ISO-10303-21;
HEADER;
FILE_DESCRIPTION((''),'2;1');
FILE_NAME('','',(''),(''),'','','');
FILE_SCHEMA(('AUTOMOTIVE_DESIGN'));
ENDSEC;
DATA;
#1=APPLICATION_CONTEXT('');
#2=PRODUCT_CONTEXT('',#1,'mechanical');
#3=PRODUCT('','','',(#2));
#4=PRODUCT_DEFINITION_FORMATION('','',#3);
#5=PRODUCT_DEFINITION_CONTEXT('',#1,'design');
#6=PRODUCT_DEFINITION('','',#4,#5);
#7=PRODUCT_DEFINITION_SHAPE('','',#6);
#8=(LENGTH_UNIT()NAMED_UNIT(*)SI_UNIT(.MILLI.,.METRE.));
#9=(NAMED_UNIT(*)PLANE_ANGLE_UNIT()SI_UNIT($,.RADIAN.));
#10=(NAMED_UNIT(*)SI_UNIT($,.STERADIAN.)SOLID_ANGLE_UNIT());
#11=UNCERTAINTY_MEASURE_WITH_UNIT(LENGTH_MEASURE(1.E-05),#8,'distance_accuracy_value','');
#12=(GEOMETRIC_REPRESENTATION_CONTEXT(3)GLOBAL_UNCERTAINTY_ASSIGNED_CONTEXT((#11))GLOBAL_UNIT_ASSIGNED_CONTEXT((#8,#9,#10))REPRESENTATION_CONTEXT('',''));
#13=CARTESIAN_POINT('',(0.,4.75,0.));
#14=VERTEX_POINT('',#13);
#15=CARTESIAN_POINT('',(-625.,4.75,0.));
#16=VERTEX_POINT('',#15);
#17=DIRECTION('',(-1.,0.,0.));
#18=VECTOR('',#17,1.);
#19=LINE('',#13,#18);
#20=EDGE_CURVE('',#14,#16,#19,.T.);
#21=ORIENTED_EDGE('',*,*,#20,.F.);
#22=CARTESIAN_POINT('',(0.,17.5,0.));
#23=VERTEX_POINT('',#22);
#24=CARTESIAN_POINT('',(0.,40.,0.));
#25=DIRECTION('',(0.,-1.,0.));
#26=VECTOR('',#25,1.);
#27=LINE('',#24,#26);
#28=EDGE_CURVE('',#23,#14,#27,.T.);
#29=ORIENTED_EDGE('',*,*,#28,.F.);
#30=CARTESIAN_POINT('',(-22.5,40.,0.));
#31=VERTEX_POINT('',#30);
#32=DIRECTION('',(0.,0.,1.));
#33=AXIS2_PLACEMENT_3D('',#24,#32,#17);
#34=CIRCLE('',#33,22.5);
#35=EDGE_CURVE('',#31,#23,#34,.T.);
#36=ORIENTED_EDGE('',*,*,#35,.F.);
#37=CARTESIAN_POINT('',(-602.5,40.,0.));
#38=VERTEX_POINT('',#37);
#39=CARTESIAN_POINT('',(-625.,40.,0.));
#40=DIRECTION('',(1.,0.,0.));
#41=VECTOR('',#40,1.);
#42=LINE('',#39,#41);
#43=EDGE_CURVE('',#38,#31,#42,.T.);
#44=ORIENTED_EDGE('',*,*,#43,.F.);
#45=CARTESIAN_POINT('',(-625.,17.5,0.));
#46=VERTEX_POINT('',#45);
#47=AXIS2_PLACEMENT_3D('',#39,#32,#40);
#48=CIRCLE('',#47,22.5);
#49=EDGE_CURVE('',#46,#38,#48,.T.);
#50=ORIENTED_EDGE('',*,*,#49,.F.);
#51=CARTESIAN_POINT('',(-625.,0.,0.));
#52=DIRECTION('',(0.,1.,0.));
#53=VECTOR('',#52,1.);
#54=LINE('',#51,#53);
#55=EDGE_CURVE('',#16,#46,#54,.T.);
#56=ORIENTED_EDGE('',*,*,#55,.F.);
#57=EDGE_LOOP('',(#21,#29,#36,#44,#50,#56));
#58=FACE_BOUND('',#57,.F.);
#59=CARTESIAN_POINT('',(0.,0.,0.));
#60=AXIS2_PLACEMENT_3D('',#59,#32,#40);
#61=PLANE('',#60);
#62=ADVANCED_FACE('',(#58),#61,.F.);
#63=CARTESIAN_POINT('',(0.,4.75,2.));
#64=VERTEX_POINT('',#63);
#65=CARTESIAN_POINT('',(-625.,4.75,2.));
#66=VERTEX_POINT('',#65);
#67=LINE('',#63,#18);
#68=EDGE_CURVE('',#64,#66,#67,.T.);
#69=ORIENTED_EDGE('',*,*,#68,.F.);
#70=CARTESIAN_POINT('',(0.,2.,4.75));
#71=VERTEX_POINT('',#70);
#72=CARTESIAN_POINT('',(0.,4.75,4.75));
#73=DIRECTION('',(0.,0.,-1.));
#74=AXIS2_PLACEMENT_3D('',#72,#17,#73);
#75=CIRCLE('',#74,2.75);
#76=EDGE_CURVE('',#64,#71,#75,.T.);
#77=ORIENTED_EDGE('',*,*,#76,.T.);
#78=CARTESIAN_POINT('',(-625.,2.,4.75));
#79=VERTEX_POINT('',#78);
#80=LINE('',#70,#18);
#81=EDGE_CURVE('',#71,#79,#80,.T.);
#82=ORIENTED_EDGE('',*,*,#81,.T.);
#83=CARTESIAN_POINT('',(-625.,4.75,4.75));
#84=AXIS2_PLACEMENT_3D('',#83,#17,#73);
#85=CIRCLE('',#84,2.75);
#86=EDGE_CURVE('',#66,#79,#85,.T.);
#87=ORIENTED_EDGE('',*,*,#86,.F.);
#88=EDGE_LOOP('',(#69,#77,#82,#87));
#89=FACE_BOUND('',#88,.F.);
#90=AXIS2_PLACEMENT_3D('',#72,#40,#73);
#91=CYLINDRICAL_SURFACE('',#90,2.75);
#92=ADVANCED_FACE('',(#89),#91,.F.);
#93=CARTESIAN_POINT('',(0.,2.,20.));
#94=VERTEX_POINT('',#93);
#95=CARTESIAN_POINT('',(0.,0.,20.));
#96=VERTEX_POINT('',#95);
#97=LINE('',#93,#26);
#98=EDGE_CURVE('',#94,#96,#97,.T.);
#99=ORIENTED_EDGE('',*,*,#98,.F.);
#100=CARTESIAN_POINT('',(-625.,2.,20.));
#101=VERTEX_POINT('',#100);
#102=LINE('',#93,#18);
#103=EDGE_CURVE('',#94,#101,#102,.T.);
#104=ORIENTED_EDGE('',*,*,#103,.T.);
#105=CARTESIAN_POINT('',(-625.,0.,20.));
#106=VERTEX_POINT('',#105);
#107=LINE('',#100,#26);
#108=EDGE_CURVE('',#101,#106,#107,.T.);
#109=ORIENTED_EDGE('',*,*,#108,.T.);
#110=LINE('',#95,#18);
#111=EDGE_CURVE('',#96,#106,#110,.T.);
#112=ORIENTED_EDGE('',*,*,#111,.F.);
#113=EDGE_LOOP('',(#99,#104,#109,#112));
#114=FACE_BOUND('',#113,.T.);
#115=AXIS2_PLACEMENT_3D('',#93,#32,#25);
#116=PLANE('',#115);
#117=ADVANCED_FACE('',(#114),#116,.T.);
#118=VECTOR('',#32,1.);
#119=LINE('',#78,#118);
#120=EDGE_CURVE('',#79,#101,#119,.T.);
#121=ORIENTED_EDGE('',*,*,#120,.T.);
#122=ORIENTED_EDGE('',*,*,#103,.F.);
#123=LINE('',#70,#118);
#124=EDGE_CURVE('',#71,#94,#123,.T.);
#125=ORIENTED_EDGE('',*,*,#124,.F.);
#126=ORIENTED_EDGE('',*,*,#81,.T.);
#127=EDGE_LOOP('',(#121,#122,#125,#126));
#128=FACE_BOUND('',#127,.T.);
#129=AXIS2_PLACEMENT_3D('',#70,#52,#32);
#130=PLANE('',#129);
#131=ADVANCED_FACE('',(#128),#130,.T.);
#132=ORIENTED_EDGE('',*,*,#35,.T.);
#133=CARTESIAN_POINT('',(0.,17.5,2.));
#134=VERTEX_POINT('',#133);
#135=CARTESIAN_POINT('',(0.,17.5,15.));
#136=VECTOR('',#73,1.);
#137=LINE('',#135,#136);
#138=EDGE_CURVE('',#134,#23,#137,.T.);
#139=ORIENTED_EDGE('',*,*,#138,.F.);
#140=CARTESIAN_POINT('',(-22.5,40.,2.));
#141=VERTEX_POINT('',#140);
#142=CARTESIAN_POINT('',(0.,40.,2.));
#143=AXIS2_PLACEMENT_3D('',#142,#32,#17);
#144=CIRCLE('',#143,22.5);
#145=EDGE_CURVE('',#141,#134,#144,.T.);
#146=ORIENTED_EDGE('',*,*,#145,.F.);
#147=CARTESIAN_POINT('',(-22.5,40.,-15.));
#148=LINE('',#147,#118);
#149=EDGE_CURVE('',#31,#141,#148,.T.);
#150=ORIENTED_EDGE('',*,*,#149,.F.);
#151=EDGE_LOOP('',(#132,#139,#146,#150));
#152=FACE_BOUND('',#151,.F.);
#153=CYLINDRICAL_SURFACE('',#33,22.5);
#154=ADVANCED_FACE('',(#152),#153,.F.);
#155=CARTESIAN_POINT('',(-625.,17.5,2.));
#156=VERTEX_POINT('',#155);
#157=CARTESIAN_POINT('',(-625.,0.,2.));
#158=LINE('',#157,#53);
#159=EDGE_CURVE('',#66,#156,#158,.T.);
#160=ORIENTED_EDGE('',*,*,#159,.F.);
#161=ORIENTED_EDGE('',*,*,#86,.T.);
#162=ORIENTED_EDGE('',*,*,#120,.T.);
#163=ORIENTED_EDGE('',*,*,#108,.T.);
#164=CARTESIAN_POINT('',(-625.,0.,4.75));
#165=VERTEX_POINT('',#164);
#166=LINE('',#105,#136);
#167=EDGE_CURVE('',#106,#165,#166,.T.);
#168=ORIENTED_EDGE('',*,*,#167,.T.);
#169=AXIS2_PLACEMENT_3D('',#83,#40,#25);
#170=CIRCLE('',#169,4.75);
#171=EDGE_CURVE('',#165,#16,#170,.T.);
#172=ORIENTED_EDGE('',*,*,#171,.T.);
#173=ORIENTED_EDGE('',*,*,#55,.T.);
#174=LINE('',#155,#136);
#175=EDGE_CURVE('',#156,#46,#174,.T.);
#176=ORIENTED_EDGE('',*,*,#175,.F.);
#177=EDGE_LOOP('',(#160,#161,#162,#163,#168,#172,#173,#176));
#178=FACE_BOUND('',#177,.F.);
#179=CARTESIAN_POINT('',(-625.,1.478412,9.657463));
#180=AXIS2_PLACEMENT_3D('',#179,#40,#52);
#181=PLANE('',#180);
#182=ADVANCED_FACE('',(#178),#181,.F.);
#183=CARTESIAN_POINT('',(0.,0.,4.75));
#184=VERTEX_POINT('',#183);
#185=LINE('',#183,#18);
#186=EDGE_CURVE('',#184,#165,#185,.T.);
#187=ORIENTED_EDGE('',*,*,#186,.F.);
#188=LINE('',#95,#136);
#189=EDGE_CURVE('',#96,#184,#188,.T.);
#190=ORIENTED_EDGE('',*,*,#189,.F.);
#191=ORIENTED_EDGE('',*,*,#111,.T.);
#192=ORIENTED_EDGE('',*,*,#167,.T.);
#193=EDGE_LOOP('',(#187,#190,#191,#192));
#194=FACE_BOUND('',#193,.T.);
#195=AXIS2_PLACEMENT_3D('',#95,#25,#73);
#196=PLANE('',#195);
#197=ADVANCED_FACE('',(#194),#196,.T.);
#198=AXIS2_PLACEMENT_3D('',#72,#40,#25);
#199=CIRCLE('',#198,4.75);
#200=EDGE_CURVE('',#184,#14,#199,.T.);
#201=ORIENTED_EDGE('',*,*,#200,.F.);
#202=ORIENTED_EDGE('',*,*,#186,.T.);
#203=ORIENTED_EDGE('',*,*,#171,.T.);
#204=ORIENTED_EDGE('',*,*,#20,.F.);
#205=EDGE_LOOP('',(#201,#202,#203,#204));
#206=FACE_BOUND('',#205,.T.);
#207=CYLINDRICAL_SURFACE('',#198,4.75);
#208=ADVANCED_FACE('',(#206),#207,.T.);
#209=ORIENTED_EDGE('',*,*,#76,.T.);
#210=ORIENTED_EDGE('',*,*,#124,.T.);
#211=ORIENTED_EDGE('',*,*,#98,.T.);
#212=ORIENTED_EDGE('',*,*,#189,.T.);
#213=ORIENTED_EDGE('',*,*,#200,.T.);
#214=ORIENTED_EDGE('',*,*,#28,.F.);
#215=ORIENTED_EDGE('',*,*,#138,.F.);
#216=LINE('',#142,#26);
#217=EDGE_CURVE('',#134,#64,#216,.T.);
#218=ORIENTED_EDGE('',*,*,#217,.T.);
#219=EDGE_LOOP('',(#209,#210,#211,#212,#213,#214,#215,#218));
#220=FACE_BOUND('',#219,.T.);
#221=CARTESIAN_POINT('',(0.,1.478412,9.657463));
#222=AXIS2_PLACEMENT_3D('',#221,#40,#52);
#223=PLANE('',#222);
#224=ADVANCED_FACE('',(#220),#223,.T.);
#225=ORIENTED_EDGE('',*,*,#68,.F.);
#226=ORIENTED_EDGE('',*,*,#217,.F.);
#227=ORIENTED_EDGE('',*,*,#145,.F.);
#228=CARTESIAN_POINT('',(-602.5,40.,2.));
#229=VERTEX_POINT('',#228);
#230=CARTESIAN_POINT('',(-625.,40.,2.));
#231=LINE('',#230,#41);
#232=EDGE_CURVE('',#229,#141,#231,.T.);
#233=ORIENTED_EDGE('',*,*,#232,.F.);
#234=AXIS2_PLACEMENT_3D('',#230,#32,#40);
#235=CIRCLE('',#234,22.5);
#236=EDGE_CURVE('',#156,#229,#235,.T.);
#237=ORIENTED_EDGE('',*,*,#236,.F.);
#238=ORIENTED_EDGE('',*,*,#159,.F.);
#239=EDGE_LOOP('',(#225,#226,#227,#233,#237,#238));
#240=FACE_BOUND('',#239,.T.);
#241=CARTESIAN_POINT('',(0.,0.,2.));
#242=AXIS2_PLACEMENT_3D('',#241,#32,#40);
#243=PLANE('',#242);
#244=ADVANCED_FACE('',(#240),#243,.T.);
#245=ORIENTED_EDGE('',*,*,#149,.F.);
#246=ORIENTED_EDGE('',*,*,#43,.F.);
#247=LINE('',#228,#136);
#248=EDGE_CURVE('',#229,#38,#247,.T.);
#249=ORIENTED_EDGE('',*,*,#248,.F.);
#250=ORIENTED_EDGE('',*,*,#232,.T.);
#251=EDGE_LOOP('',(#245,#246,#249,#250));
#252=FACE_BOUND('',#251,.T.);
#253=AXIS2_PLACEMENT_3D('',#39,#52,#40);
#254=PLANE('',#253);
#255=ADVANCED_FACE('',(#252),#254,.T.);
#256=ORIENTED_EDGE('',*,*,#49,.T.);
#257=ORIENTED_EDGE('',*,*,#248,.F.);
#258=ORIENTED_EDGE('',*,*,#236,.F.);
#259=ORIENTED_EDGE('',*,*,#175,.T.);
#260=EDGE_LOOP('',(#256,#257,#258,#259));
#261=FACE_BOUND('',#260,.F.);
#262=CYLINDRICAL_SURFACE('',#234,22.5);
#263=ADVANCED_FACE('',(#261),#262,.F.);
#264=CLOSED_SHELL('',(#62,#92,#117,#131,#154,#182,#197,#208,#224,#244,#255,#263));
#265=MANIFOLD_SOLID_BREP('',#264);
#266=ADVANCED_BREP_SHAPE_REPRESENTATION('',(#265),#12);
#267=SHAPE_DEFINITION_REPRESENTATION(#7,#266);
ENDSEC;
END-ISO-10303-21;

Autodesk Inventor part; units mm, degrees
ref_plane "YZ Plane" through (0, 0, 0) normal (1, 0, 0) x (0, 1, 0)
ref_plane "XZ Plane" through (0, 0, 0) normal (0, 1, 0) x (-1, 0, 0)
ref_plane "XY Plane" through (0, 0, 0) normal (0, 0, 1) x (1, 0, 0)
sketch "Sketch1" plane through (0, 0, 0) normal (0, 0, 1) x (1, 0, 0)
  line L0 (-625, 40) -> (0, 40)
  line L1 (0, 40) -> (0, 0)
  line L2 (0, 0) -> (-625, 0)
  line L3 (-625, 0) -> (-625, 40)
  point P0 (-312.5, 0)
  dimension "d1" = 40
  dimension "d45" = 625
extrude "Plate1" add sketch "Sketch1" along normal blind 2
sketch "Sketch2" plane through (0, 2, 0) normal (0, -1, 0) x (1, 0, 0)
  line L0 (-625, 0) -> (0, 0)
  line L1 (0, 0) -> (0, 20)
  line L2 (0, 20) -> (-625, 20)
  line L3 (-625, 20) -> (-625, 0)
edge flange "Flange1" height 20 angle 90 thickness 2 bend radius 2.75 thickness toward (0, -1, 0) relief round relief width 2 relief depth 1 edges at (-312.5, 0, 2) wall of the first edge with corners at (-625, 2, 0) (0, 2, 0) (0, 2, 20) (-625, 2, 20)
bend "Bend1"
corner "Corner1"
sketch "Sketch6" plane through (0, 0, 0) normal (0, 0, -1) x (-1, 0, 0)
  line L0 (0, 40) -> (0, 4.75) projected
  circle A0 centre (0, 40) radius 22.5
  line L1 (0, 40) -> (625, 40) projected
  line L2 (-499, 30) -> (-499, 67.6691) projected
  point P0 (0, 0)
  point P1 (22.5, 40)
  point P2 (0, 17.5)
  dimension "d24" = 45
extrude "Extrusion2" cut sketch "Sketch6" along normal mid plane 30 contours L1 A0 L0 picked at (14.812, 38.3311)
sketch "Sketch9" plane through (0, 0, 2) normal (0, 0, 1) x (1, 0, 0)
  line L0 (-256.9226, 35) -> (-256.9226, 23) construction
  line L1 (-256.9226, 23) -> (-456.9226, 23) construction
  line L2 (-456.9226, 23) -> (-456.9226, 35) construction
  line L3 (-456.9226, 35) -> (-256.9226, 35) construction
  line L4 (-625, 40) -> (0, 40) projected
  point P0 (0, 0)
  dimension "d40" = 200
  dimension "d41" = 12
  dimension "d43" = 5
mark "Mark2"
sketch "Sketch10" plane through (-625, 40, 2) normal (0, 0, 1) x (1, 0, 0)
  circle A0 centre (0, 0) radius 22.5
  line L0 (171.5218, -6.4882) -> (171.5218, -9.8215) projected
  line L1 (171.5218, -9.8215) -> (171.5218, -16.4882) projected
  line L2 (171.5218, -9.8215) -> (167.0774, -13.1549) projected
  line L3 (194.8552, -13.1549) -> (194.8552, -6.4882) projected
  line L4 (194.8552, -16.4882) -> (194.8552, -13.1549) projected
  line L5 (192.0774, -13.1549) -> (194.8552, -13.1549) projected
  arc A1 (190.4107, -11.4882) -> (192.0774, -13.1549) centre (192.0774, -11.4882) ccw projected
  line L6 (190.4107, -8.1549) -> (190.4107, -11.4882) projected
  arc A2 (192.0774, -6.4882) -> (190.4107, -8.1549) centre (192.0774, -8.1549) ccw projected
  line L7 (194.8552, -6.4882) -> (192.0774, -6.4882) projected
  line L8 (230.4107, -6.4882) -> (230.9663, -6.4882) projected
  arc A3 (232.6329, -8.1549) -> (230.9663, -6.4882) centre (230.9663, -8.1549) ccw projected
  line L9 (232.6329, -8.1549) -> (232.6329, -16.4882) projected
  circle A4 centre (276.244, -16.2104) radius 0.2778 projected
  line L10 (276.244, -6.4882) -> (276.244, -13.1549) projected
  line L11 (288.744, -6.4882) -> (288.744, -13.1549) projected
  line L12 (289.8552, -13.1549) -> (288.744, -13.1549) projected
  line L13 (288.744, -13.1549) -> (288.744, -16.4882) projected
  line L14 (288.744, -13.1549) -> (286.5218, -13.1549) projected
  line L15 (344.2996, -6.4882) -> (346.5218, -6.4882) projected
  arc A5 (348.744, -8.7104) -> (346.5218, -6.4882) centre (346.5218, -8.7104) ccw projected
  line L16 (348.744, -8.7104) -> (348.744, -14.266) projected
  arc A6 (346.5218, -16.4882) -> (348.744, -14.266) centre (346.5218, -14.266) ccw projected
  line L17 (346.5218, -16.4882) -> (344.2996, -16.4882) projected
  line L18 (367.0774, -6.4882) -> (367.0774, -16.4882) projected
  line L19 (367.0774, -16.4882) -> (363.744, -10.9326) projected
  line L20 (363.744, -10.9326) -> (360.4107, -16.4882) projected
  line L21 (360.4107, -16.4882) -> (360.4107, -6.4882) projected
  arc A7 (357.0774, -7.0437) -> (354.2996, -6.4882) centre (355.0103, -10.157) ccw projected
  arc A8 (354.2996, -6.4882) -> (353.1885, -10.9326) centre (354.3983, -8.874) ccw projected
  line L22 (353.1885, -10.9326) -> (355.9663, -12.5993) projected
  arc A9 (356.5218, -15.9326) -> (355.9663, -12.5993) centre (354.8374, -14.5004) ccw projected
  arc A10 (352.0774, -15.9326) -> (356.5218, -15.9326) centre (354.2996, -11.8029) ccw projected
  arc A11 (327.0774, -15.3771) -> (330.4107, -15.3771) centre (328.744, -14.6897) ccw projected
  arc A12 (327.0774, -7.5993) -> (327.0774, -15.3771) centre (340.5209, -11.4882) ccw projected
  arc A13 (330.4107, -7.5993) -> (327.0774, -7.5993) centre (328.744, -8.308) ccw projected
  arc A14 (330.4107, -15.3771) -> (330.4107, -7.5993) centre (316.9672, -11.4882) ccw projected
  arc A15 (319.8552, -16.4882) -> (323.1885, -10.9326) centre (317.4255, -11.2526) ccw projected
  line L23 (323.1885, -10.9326) -> (323.1885, -8.7104) projected
  arc A16 (323.1885, -8.7104) -> (318.744, -8.7104) centre (320.9663, -8.7104) ccw projected
  line L24 (318.744, -8.7104) -> (318.744, -9.8215) projected
  arc A17 (318.744, -9.8215) -> (320.9663, -12.0437) centre (320.9663, -9.8215) ccw projected
  line L25 (320.9663, -12.0437) -> (322.6329, -12.0437) projected
  line L26 (310.9663, -8.7104) -> (310.9663, -9.8215) projected
  arc A18 (315.4107, -8.7104) -> (310.9663, -8.7104) centre (313.1885, -8.7104) ccw projected
  line L27 (315.4107, -9.8215) -> (315.4107, -8.7104) projected
  arc A19 (313.1885, -12.0437) -> (315.4107, -9.8215) centre (313.1885, -9.8215) ccw projected
  line L28 (313.744, -12.0437) -> (313.1885, -12.0437) projected
  arc A20 (315.4107, -13.7104) -> (313.744, -12.0437) centre (313.744, -13.7104) ccw projected
  line L29 (315.4107, -14.8215) -> (315.4107, -13.7104) projected
  arc A21 (313.744, -16.4882) -> (315.4107, -14.8215) centre (313.744, -14.8215) ccw projected
  line L30 (312.6329, -16.4882) -> (313.744, -16.4882) projected
  arc A22 (310.9663, -14.8215) -> (312.6329, -16.4882) centre (312.6329, -14.8215) ccw projected
  line L31 (310.9663, -13.7104) -> (310.9663, -14.8215) projected
  arc A23 (312.6329, -12.0437) -> (310.9663, -13.7104) centre (312.6329, -13.7104) ccw projected
  line L32 (313.1885, -12.0437) -> (312.6329, -12.0437) projected
  arc A24 (310.9663, -9.8215) -> (313.1885, -12.0437) centre (313.1885, -9.8215) ccw projected
  arc A25 (297.6329, -7.5993) -> (295.9663, -6.4882) centre (295.9544, -8.3116) ccw projected
  line L33 (295.9663, -6.4882) -> (294.8552, -6.4882) projected
  arc A26 (294.8552, -6.4882) -> (293.1885, -7.5993) centre (294.8671, -8.3116) ccw projected
  line L34 (293.1885, -7.5993) -> (293.1885, -8.1549) projected
  arc A27 (293.1885, -8.1549) -> (294.2996, -9.266) centre (295.044, -7.4104) ccw projected
  line L35 (294.2996, -9.266) -> (296.5218, -10.3771) projected
  arc A28 (297.6329, -11.4882) -> (296.5218, -10.3771) centre (295.7774, -12.2326) ccw projected
  line L36 (297.6329, -11.4882) -> (297.6329, -12.0437) projected
  arc A29 (295.9663, -13.1549) -> (297.6329, -12.0437) centre (295.9544, -11.3314) ccw projected
  line L37 (295.9663, -13.1549) -> (294.8552, -13.1549) projected
  arc A30 (293.1885, -12.0437) -> (294.8552, -13.1549) centre (294.8671, -11.3314) ccw projected
  line L38 (283.1885, -6.4882) -> (283.1885, -13.1549) projected
  line L39 (283.1885, -13.1549) -> (280.9663, -13.1549) projected
  arc A31 (279.8552, -12.0437) -> (280.9663, -13.1549) centre (280.9663, -12.0437) ccw projected
  line L40 (272.6329, -6.4882) -> (272.6329, -13.1549) projected
  line L41 (272.6329, -13.1549) -> (269.8552, -13.1549) projected
  arc A32 (268.1885, -11.4882) -> (269.8552, -13.1549) centre (269.8552, -11.4882) ccw projected
  line L42 (268.1885, -11.4882) -> (268.1885, -6.4882) projected
  line L43 (263.1885, -13.1549) -> (260.4107, -13.1549) projected
  line L44 (260.4107, -13.1549) -> (260.4107, -6.4882) projected
  line L45 (260.4107, -6.4882) -> (260.4107, -4.8215) projected
  arc A33 (262.0774, -3.1549) -> (260.4107, -4.8215) centre (262.0774, -4.8215) ccw projected
  line L46 (262.0774, -3.1549) -> (264.8552, -3.1549) projected
  line L47 (260.4107, -6.4882) -> (263.1885, -6.4882) projected
  arc A34 (264.8552, -8.1549) -> (263.1885, -6.4882) centre (263.1885, -8.1549) ccw projected
  line L48 (264.8552, -8.1549) -> (264.8552, -11.4882) projected
  arc A35 (263.1885, -13.1549) -> (264.8552, -11.4882) centre (263.1885, -11.4882) ccw projected
  line L49 (257.0774, -10.9326) -> (257.0774, -9.8215) projected
  arc A36 (252.6329, -10.9326) -> (257.0774, -10.9326) centre (254.8552, -10.9326) ccw projected
  line L50 (252.6329, -9.8215) -> (252.6329, -10.9326) projected
  line L51 (257.0774, -9.8215) -> (252.6329, -9.8215) projected
  line L52 (257.0774, -9.8215) -> (257.0774, -8.1549) projected
  arc A37 (257.0774, -8.1549) -> (255.4107, -6.4882) centre (255.4107, -8.1549) ccw projected
  line L53 (255.4107, -6.4882) -> (252.6329, -6.4882) projected
  line L54 (249.2996, -6.4882) -> (249.2996, -13.1549) projected
  line L55 (249.2996, -13.1549) -> (247.0774, -13.1549) projected
  arc A38 (245.9663, -12.0437) -> (247.0774, -13.1549) centre (247.0774, -12.0437) ccw projected
  arc A39 (222.6329, -10.9326) -> (227.0774, -10.9326) centre (224.8552, -10.9326) ccw projected
  line L56 (222.6329, -8.7104) -> (222.6329, -10.9326) projected
  arc A40 (227.0774, -8.7104) -> (222.6329, -8.7104) centre (224.8552, -8.7104) ccw projected
  line L57 (227.0774, -10.9326) -> (227.0774, -8.7104) projected
  line L58 (219.2996, -13.1549) -> (217.6329, -6.4882) projected
  line L59 (217.6329, -6.4882) -> (215.9663, -10.9326) projected
  line L60 (215.9663, -10.9326) -> (214.2996, -6.4882) projected
  line L61 (214.2996, -6.4882) -> (212.6329, -13.1549) projected
  line L62 (209.2996, -10.9326) -> (209.2996, -9.8215) projected
  arc A41 (204.8552, -10.9326) -> (209.2996, -10.9326) centre (207.0774, -10.9326) ccw projected
  line L63 (204.8552, -9.8215) -> (204.8552, -10.9326) projected
  line L64 (209.2996, -9.8215) -> (204.8552, -9.8215) projected
  line L65 (209.2996, -9.8215) -> (209.2996, -8.1549) projected
  arc A42 (209.2996, -8.1549) -> (207.6329, -6.4882) centre (207.6329, -8.1549) ccw projected
  line L66 (207.6329, -6.4882) -> (204.8552, -6.4882) projected
  line L67 (201.5218, -6.4882) -> (201.5218, -13.1549) projected
  line L68 (201.5218, -13.1549) -> (199.2996, -13.1549) projected
  arc A43 (198.1885, -12.0437) -> (199.2996, -13.1549) centre (199.2996, -12.0437) ccw projected
  line L69 (184.8552, -13.1549) -> (182.6329, -13.1549) projected
  line L70 (182.6329, -13.1549) -> (182.6329, -8.1549) projected
  line L71 (182.6329, -8.1549) -> (182.6329, -7.5993) projected
  arc A44 (182.6329, -7.5993) -> (181.5218, -6.4882) centre (181.5218, -7.5993) ccw projected
  arc A45 (184.2996, -6.4882) -> (182.6329, -8.1549) centre (184.2996, -8.1549) ccw projected
  line L72 (184.2996, -6.4882) -> (185.4107, -6.4882) projected
  arc A46 (187.0774, -8.1549) -> (185.4107, -6.4882) centre (185.4107, -8.1549) ccw projected
  line L73 (187.0774, -8.1549) -> (187.0774, -10.9326) projected
  arc A47 (184.8552, -13.1549) -> (187.0774, -10.9326) centre (184.8552, -10.9326) ccw projected
  line L74 (174.8552, -6.4882) -> (176.5218, -6.4882) projected
  arc A48 (178.1885, -8.1549) -> (176.5218, -6.4882) centre (176.5218, -8.1549) ccw projected
  line L75 (178.1885, -8.1549) -> (178.1885, -11.4882) projected
  arc A49 (176.5218, -13.1549) -> (178.1885, -11.4882) centre (176.5218, -11.4882) ccw projected
  line L76 (176.5218, -13.1549) -> (174.8552, -13.1549) projected
  line L77 (169.8552, -10.9326) -> (167.0774, -6.4882) projected
  arc A50 (602.5, 0) -> (625, -22.5) centre (625, 0) ccw projected
  line L78 (0, 0) -> (602.5, 0) projected
  line L79 (0, -35.25) -> (0, 0) projected
  line L80 (0, -35.25) -> (625, -35.25) projected
  line L81 (625, -22.5) -> (625, -35.25) projected
  point P0 (625, -40)
  point P1 (0, -22.5)
  point P2 (22.5, 0)
  dimension "d46" = 45
extrude "Extrusion4" cut sketch "Sketch10" against normal through all contours A0 L79 L78 picked at (14.812, -1.6689)
equation "\"d43\" = d42"
equation "\"d2\" = Thickness"
equation "\"d3\" = BendReliefWidth"
equation "\"d4\" = BendReliefDepth"
equation "\"d5\" = MinimumRemnant"
equation "\"d6\" = TransitionRadius"
equation "\"d9\" = BendRadius"
equation "\"d10\" = CornerReliefSize"
equation "\"d11\" = GapSize"
equation "\"d12\" = JacobiRadiusSize"
equation "\"BendReliefWidth\" = Thickness"
equation "\"BendReliefDepth\" = 0.5 * Thickness"
equation "\"CornerReliefSize\" = 4 * Thickness"
equation "\"MinimumRemnant\" = 2 * Thickness"
equation "\"TransitionRadius\" = BendRadius"
equation "\"JacobiRadiusSize\" = BendRadius"
equation "\"GapSize\" = Thickness"
equation "\"qqqqqq\" = 67.35706"
equation "\"d42\" = 5"
equation "\"Thickness\" = 2"
equation "\"BendRadius\" = 2.75"
properties part number "MSC 408 stringer lowerback" material "Stainless Steel"
